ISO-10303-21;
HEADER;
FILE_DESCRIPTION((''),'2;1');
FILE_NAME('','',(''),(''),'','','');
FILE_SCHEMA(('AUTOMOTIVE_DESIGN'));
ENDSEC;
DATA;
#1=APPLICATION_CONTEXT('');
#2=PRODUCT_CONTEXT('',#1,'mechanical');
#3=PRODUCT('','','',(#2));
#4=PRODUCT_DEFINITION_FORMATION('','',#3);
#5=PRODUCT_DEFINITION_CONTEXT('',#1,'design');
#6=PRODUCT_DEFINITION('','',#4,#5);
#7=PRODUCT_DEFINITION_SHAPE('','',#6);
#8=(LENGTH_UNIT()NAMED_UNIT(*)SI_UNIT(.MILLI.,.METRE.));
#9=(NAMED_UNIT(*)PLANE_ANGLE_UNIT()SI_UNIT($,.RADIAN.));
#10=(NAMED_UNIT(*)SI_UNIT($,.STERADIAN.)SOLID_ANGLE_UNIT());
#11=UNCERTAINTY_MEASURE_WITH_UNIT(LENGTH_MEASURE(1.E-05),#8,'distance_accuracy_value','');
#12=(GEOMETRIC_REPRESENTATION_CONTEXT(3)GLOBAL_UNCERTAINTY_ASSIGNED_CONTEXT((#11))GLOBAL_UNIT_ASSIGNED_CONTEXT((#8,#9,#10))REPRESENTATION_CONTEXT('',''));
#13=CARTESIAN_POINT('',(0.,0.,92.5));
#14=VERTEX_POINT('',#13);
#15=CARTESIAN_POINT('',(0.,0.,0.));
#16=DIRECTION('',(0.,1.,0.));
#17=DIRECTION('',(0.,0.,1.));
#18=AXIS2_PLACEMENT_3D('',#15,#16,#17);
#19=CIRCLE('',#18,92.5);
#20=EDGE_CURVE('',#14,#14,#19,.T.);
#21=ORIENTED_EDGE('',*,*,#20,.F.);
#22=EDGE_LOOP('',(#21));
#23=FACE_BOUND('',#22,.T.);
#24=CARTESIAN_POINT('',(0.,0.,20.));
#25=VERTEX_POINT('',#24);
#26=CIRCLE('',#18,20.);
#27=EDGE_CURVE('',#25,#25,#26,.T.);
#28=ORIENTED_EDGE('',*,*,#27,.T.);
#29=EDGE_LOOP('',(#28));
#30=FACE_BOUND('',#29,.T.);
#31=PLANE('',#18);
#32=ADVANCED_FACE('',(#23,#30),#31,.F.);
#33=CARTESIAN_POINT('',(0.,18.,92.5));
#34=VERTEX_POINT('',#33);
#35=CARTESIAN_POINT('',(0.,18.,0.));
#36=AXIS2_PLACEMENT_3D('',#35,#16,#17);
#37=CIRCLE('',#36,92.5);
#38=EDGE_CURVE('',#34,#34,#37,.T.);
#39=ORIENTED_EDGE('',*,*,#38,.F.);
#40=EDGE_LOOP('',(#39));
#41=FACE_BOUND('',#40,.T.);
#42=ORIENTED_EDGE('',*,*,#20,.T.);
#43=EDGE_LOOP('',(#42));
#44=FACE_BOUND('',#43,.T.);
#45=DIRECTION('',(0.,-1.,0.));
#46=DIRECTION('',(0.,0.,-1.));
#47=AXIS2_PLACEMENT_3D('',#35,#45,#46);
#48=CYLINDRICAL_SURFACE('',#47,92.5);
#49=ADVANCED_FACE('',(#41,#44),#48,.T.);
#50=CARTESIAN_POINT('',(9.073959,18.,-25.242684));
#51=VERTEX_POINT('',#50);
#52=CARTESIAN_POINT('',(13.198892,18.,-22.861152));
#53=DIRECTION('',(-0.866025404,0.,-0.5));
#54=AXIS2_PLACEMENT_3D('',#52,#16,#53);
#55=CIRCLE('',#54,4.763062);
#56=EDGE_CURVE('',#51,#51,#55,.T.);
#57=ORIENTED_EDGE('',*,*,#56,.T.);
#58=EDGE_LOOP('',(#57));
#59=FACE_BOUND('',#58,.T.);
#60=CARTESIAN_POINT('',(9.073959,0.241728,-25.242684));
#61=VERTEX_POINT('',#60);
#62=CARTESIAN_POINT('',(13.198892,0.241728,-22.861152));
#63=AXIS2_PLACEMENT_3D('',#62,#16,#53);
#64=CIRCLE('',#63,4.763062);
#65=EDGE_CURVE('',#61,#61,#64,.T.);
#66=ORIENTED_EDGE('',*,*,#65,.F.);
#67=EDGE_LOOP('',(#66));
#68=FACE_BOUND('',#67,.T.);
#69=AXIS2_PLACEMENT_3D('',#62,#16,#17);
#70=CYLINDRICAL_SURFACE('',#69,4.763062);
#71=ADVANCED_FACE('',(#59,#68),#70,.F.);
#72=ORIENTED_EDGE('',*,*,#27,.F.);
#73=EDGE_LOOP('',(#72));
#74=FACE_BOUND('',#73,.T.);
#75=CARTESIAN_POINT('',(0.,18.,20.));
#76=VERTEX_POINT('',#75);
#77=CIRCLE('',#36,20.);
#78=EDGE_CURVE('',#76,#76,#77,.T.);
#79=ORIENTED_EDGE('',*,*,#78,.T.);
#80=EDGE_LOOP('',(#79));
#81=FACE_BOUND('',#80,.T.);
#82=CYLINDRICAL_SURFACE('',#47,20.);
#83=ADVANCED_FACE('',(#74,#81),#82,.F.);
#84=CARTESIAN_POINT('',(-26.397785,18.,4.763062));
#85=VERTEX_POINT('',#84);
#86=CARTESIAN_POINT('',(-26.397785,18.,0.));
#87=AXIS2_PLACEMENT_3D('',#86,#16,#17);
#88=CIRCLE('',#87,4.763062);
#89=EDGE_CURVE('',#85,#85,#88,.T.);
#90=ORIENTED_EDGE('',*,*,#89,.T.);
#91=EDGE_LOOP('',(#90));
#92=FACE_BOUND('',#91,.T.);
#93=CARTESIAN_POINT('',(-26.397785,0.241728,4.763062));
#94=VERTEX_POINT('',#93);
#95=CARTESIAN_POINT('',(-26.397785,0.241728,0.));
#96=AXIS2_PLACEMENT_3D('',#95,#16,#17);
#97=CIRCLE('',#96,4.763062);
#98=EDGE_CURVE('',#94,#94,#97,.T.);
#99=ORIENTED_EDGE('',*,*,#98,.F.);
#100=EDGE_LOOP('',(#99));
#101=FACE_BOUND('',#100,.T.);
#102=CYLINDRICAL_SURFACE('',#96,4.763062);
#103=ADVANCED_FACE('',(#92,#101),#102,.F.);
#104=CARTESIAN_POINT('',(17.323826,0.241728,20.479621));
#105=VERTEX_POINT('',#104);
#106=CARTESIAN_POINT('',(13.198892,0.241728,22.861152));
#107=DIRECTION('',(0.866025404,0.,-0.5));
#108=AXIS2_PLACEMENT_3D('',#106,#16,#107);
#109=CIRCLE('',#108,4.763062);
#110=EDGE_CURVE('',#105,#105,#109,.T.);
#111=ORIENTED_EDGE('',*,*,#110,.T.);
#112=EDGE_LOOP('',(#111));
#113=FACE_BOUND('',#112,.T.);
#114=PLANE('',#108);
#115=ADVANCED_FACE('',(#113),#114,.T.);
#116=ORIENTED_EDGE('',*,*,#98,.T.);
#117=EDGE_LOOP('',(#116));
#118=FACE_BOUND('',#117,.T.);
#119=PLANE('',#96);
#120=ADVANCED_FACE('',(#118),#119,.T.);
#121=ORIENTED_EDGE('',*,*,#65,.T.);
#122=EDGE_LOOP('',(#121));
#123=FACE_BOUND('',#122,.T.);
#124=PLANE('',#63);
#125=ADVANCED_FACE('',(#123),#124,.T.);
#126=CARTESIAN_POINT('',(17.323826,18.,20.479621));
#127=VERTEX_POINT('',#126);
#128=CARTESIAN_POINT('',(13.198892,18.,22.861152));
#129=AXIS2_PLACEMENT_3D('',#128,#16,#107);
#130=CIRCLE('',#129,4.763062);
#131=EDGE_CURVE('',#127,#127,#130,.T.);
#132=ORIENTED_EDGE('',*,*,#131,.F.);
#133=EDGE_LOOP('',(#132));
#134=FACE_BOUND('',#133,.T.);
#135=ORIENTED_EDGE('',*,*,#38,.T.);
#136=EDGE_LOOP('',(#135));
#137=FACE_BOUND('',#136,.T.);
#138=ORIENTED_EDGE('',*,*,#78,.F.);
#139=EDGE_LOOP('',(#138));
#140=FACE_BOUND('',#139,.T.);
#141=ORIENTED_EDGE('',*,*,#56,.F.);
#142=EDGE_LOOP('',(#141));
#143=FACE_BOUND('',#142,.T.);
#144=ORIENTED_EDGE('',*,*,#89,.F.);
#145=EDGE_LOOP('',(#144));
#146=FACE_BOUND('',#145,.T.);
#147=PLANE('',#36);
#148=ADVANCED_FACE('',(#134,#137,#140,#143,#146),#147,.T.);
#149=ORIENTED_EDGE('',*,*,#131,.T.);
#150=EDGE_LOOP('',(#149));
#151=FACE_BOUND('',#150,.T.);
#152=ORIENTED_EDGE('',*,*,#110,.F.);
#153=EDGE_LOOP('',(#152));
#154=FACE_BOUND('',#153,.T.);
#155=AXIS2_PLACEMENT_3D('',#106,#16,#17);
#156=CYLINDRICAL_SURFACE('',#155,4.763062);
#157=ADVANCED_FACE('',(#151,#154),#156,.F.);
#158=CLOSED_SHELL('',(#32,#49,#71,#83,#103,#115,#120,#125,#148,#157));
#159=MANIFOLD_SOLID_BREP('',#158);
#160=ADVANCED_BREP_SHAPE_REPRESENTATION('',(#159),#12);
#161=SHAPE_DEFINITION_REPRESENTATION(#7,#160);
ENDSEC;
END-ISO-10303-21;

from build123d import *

# Parameters (mm, degrees)
SKETCH1_R           = 92.5
BOSS_EXTRUDE1_DEPTH = 18
SKETCH2_R           = 20
CUT_EXTRUDE1_DEPTH  = 133.047339996
SKETCH3_R           = 4.763062498
CUT_EXTRUDE2_DEPTH  = 17.758271805
CIRPATTERN1_COUNT   = 3


with BuildPart() as part:
    # Sketch1 → Boss-Extrude1 (new body)
    with BuildSketch(Plane(origin=(0, 0, 0), x_dir=(1, 0, 0), z_dir=(0, 1, 0))):
        Circle(SKETCH1_R)
    extrude(amount=BOSS_EXTRUDE1_DEPTH)

    # Sketch2 → Cut-Extrude1 (cut, through all)
    with BuildSketch(Plane(origin=(0, 0, 0), x_dir=(1, 0, 0), z_dir=(0, 1, 0))):
        Circle(SKETCH2_R)
    extrude(amount=CUT_EXTRUDE1_DEPTH, mode=Mode.SUBTRACT)

    # Sketch3 → Cut-Extrude2 (cut)
    with BuildSketch(Plane(origin=(0, 18, 0), x_dir=(1, 0, 0), z_dir=(0, 1, 0))):
        with Locations((-26.397784928, 0)):
            Circle(SKETCH3_R)
    cut_extrude2 = extrude(amount=-CUT_EXTRUDE2_DEPTH, mode=Mode.SUBTRACT)

    # CirPattern1: Cut-Extrude2 ×3 about axis
    cirpattern1_axis = Axis((0, 0, 0), (0, 1, 0))
    for i in range(1, CIRPATTERN1_COUNT):
        add(cut_extrude2.rotate(cirpattern1_axis, i * 360 / CIRPATTERN1_COUNT), mode=Mode.SUBTRACT)


solid = part.part
